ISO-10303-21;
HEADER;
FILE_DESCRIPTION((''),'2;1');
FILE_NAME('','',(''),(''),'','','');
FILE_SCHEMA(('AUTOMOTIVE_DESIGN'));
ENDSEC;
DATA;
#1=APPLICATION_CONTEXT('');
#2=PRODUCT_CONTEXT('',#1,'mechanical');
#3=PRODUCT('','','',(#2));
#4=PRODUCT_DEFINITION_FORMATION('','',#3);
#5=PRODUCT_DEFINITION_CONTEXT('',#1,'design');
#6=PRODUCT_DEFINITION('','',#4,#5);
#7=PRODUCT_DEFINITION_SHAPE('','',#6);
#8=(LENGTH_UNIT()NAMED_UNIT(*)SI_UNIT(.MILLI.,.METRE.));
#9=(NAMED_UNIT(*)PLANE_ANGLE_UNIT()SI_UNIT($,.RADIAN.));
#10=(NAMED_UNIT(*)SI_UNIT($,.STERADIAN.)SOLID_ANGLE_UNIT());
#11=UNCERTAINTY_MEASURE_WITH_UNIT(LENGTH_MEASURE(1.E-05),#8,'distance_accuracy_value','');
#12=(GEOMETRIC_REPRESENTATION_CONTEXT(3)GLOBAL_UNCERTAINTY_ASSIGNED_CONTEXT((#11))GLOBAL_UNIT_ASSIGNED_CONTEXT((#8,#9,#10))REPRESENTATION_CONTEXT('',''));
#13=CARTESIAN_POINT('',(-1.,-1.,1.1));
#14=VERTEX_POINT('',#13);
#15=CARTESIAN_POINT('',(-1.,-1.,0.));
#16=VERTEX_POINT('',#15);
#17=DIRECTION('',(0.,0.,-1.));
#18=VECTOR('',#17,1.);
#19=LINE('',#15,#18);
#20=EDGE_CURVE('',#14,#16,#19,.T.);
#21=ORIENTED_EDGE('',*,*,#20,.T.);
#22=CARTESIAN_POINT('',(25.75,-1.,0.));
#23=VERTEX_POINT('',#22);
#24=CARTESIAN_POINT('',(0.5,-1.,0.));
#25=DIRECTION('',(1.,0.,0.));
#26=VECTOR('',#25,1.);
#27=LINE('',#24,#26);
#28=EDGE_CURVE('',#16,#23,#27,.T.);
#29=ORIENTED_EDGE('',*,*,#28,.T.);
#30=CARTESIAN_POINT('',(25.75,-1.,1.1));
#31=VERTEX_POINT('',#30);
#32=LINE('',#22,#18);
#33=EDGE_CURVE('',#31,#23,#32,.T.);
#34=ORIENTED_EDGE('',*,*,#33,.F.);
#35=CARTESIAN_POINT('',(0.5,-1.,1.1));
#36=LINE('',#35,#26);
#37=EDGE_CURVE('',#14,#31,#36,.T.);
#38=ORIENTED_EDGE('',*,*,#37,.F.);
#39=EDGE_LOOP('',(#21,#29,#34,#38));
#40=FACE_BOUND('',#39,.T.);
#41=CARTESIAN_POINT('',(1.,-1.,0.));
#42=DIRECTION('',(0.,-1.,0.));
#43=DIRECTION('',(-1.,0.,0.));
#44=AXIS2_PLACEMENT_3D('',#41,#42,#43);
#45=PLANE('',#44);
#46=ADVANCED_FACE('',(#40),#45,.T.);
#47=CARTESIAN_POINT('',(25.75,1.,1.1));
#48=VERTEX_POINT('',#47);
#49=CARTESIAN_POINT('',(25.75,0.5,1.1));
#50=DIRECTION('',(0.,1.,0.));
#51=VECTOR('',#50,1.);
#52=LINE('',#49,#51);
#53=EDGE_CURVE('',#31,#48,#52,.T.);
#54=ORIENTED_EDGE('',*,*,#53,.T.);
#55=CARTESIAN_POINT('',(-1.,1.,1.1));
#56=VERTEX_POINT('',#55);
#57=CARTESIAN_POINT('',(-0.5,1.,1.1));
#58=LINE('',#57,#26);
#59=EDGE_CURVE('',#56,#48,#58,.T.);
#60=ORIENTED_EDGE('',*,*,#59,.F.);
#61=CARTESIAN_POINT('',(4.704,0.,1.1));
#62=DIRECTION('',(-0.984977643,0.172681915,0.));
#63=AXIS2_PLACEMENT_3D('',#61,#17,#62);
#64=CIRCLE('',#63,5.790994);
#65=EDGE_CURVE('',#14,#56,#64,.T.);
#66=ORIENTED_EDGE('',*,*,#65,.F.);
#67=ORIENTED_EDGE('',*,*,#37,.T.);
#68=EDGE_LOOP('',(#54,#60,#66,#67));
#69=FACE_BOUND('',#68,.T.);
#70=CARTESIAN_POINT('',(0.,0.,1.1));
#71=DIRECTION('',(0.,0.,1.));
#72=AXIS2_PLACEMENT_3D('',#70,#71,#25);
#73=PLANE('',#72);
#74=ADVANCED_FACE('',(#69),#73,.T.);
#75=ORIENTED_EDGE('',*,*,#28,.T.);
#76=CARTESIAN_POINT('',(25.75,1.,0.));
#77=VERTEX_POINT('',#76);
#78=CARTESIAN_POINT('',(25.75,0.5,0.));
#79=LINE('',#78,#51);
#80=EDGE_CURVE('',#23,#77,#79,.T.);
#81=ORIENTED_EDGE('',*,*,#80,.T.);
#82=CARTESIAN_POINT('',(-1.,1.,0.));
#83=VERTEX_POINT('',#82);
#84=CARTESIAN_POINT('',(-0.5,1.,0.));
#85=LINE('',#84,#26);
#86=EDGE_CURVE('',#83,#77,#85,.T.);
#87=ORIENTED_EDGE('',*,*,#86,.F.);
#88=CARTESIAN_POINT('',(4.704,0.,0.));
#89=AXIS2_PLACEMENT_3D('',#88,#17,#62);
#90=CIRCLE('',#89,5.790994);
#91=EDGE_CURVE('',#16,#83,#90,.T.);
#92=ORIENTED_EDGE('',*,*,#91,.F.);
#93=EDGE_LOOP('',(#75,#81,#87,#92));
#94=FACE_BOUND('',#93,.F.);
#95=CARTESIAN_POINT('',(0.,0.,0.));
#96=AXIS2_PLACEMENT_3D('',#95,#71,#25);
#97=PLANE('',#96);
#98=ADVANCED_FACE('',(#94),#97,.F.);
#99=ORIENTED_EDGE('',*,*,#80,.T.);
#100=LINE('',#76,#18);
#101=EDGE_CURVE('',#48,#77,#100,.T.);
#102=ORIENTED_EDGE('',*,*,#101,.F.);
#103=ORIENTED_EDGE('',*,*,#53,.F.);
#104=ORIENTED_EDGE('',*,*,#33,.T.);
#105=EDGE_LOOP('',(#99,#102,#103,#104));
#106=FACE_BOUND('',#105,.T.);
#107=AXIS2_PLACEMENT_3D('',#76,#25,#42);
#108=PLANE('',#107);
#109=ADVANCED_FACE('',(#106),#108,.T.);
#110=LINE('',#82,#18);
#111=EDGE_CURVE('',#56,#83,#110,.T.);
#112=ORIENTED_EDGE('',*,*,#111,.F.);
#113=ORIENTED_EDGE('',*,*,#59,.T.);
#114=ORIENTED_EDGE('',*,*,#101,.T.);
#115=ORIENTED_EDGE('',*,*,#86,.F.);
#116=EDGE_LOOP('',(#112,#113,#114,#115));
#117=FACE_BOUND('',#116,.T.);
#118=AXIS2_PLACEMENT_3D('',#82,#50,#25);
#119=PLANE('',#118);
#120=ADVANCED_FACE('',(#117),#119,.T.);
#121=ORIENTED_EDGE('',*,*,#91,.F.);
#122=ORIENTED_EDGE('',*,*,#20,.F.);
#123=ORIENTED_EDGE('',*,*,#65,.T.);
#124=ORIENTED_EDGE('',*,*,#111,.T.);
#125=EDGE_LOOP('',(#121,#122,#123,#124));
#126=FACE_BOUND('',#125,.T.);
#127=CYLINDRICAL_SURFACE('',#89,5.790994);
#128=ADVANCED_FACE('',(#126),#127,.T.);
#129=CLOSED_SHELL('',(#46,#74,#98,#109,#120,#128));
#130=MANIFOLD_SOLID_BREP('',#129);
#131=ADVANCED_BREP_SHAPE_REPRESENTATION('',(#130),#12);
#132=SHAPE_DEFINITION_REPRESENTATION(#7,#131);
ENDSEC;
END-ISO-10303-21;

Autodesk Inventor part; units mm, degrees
ref_plane "YZ Plane" through (0, 0, 0) normal (1, 0, 0) x (0, 1, 0)
ref_plane "XZ Plane" through (0, 0, 0) normal (0, 1, 0) x (-1, 0, 0)
ref_plane "XY Plane" through (0, 0, 0) normal (0, 0, 1) x (1, 0, 0)
sketch "Sketch1" plane through (0, 0, 0) normal (0, 0, 1) x (1, 0, 0)
  line L0 (-2.2452, 0) -> (5.8622, 0) projected
  line L1 (-1, 1) -> (1, 1)
  line L2 (1, 1) -> (1, -1)
  line L3 (1, -1) -> (-1, -1)
  line L4 (-1, -1) -> (-1, 1)
  line L5 (-1, 1) -> (1, -1) construction
  line L6 (1, 1) -> (-1, -1) construction
  arc A0 (-1, 1) -> (-1, -1) centre (4.704, 0) ccw
  point P0 (0, 0)
  dimension "d11" = 2
  dimension "d12" = 2
extrude "Extrusion2" add sketch "Sketch1" along normal blind 1.1
move faces "Move1" translate (24.75, 0, 0) faces at (1, 0.3333, 0.3667)
properties part number "pin_interconnect"
